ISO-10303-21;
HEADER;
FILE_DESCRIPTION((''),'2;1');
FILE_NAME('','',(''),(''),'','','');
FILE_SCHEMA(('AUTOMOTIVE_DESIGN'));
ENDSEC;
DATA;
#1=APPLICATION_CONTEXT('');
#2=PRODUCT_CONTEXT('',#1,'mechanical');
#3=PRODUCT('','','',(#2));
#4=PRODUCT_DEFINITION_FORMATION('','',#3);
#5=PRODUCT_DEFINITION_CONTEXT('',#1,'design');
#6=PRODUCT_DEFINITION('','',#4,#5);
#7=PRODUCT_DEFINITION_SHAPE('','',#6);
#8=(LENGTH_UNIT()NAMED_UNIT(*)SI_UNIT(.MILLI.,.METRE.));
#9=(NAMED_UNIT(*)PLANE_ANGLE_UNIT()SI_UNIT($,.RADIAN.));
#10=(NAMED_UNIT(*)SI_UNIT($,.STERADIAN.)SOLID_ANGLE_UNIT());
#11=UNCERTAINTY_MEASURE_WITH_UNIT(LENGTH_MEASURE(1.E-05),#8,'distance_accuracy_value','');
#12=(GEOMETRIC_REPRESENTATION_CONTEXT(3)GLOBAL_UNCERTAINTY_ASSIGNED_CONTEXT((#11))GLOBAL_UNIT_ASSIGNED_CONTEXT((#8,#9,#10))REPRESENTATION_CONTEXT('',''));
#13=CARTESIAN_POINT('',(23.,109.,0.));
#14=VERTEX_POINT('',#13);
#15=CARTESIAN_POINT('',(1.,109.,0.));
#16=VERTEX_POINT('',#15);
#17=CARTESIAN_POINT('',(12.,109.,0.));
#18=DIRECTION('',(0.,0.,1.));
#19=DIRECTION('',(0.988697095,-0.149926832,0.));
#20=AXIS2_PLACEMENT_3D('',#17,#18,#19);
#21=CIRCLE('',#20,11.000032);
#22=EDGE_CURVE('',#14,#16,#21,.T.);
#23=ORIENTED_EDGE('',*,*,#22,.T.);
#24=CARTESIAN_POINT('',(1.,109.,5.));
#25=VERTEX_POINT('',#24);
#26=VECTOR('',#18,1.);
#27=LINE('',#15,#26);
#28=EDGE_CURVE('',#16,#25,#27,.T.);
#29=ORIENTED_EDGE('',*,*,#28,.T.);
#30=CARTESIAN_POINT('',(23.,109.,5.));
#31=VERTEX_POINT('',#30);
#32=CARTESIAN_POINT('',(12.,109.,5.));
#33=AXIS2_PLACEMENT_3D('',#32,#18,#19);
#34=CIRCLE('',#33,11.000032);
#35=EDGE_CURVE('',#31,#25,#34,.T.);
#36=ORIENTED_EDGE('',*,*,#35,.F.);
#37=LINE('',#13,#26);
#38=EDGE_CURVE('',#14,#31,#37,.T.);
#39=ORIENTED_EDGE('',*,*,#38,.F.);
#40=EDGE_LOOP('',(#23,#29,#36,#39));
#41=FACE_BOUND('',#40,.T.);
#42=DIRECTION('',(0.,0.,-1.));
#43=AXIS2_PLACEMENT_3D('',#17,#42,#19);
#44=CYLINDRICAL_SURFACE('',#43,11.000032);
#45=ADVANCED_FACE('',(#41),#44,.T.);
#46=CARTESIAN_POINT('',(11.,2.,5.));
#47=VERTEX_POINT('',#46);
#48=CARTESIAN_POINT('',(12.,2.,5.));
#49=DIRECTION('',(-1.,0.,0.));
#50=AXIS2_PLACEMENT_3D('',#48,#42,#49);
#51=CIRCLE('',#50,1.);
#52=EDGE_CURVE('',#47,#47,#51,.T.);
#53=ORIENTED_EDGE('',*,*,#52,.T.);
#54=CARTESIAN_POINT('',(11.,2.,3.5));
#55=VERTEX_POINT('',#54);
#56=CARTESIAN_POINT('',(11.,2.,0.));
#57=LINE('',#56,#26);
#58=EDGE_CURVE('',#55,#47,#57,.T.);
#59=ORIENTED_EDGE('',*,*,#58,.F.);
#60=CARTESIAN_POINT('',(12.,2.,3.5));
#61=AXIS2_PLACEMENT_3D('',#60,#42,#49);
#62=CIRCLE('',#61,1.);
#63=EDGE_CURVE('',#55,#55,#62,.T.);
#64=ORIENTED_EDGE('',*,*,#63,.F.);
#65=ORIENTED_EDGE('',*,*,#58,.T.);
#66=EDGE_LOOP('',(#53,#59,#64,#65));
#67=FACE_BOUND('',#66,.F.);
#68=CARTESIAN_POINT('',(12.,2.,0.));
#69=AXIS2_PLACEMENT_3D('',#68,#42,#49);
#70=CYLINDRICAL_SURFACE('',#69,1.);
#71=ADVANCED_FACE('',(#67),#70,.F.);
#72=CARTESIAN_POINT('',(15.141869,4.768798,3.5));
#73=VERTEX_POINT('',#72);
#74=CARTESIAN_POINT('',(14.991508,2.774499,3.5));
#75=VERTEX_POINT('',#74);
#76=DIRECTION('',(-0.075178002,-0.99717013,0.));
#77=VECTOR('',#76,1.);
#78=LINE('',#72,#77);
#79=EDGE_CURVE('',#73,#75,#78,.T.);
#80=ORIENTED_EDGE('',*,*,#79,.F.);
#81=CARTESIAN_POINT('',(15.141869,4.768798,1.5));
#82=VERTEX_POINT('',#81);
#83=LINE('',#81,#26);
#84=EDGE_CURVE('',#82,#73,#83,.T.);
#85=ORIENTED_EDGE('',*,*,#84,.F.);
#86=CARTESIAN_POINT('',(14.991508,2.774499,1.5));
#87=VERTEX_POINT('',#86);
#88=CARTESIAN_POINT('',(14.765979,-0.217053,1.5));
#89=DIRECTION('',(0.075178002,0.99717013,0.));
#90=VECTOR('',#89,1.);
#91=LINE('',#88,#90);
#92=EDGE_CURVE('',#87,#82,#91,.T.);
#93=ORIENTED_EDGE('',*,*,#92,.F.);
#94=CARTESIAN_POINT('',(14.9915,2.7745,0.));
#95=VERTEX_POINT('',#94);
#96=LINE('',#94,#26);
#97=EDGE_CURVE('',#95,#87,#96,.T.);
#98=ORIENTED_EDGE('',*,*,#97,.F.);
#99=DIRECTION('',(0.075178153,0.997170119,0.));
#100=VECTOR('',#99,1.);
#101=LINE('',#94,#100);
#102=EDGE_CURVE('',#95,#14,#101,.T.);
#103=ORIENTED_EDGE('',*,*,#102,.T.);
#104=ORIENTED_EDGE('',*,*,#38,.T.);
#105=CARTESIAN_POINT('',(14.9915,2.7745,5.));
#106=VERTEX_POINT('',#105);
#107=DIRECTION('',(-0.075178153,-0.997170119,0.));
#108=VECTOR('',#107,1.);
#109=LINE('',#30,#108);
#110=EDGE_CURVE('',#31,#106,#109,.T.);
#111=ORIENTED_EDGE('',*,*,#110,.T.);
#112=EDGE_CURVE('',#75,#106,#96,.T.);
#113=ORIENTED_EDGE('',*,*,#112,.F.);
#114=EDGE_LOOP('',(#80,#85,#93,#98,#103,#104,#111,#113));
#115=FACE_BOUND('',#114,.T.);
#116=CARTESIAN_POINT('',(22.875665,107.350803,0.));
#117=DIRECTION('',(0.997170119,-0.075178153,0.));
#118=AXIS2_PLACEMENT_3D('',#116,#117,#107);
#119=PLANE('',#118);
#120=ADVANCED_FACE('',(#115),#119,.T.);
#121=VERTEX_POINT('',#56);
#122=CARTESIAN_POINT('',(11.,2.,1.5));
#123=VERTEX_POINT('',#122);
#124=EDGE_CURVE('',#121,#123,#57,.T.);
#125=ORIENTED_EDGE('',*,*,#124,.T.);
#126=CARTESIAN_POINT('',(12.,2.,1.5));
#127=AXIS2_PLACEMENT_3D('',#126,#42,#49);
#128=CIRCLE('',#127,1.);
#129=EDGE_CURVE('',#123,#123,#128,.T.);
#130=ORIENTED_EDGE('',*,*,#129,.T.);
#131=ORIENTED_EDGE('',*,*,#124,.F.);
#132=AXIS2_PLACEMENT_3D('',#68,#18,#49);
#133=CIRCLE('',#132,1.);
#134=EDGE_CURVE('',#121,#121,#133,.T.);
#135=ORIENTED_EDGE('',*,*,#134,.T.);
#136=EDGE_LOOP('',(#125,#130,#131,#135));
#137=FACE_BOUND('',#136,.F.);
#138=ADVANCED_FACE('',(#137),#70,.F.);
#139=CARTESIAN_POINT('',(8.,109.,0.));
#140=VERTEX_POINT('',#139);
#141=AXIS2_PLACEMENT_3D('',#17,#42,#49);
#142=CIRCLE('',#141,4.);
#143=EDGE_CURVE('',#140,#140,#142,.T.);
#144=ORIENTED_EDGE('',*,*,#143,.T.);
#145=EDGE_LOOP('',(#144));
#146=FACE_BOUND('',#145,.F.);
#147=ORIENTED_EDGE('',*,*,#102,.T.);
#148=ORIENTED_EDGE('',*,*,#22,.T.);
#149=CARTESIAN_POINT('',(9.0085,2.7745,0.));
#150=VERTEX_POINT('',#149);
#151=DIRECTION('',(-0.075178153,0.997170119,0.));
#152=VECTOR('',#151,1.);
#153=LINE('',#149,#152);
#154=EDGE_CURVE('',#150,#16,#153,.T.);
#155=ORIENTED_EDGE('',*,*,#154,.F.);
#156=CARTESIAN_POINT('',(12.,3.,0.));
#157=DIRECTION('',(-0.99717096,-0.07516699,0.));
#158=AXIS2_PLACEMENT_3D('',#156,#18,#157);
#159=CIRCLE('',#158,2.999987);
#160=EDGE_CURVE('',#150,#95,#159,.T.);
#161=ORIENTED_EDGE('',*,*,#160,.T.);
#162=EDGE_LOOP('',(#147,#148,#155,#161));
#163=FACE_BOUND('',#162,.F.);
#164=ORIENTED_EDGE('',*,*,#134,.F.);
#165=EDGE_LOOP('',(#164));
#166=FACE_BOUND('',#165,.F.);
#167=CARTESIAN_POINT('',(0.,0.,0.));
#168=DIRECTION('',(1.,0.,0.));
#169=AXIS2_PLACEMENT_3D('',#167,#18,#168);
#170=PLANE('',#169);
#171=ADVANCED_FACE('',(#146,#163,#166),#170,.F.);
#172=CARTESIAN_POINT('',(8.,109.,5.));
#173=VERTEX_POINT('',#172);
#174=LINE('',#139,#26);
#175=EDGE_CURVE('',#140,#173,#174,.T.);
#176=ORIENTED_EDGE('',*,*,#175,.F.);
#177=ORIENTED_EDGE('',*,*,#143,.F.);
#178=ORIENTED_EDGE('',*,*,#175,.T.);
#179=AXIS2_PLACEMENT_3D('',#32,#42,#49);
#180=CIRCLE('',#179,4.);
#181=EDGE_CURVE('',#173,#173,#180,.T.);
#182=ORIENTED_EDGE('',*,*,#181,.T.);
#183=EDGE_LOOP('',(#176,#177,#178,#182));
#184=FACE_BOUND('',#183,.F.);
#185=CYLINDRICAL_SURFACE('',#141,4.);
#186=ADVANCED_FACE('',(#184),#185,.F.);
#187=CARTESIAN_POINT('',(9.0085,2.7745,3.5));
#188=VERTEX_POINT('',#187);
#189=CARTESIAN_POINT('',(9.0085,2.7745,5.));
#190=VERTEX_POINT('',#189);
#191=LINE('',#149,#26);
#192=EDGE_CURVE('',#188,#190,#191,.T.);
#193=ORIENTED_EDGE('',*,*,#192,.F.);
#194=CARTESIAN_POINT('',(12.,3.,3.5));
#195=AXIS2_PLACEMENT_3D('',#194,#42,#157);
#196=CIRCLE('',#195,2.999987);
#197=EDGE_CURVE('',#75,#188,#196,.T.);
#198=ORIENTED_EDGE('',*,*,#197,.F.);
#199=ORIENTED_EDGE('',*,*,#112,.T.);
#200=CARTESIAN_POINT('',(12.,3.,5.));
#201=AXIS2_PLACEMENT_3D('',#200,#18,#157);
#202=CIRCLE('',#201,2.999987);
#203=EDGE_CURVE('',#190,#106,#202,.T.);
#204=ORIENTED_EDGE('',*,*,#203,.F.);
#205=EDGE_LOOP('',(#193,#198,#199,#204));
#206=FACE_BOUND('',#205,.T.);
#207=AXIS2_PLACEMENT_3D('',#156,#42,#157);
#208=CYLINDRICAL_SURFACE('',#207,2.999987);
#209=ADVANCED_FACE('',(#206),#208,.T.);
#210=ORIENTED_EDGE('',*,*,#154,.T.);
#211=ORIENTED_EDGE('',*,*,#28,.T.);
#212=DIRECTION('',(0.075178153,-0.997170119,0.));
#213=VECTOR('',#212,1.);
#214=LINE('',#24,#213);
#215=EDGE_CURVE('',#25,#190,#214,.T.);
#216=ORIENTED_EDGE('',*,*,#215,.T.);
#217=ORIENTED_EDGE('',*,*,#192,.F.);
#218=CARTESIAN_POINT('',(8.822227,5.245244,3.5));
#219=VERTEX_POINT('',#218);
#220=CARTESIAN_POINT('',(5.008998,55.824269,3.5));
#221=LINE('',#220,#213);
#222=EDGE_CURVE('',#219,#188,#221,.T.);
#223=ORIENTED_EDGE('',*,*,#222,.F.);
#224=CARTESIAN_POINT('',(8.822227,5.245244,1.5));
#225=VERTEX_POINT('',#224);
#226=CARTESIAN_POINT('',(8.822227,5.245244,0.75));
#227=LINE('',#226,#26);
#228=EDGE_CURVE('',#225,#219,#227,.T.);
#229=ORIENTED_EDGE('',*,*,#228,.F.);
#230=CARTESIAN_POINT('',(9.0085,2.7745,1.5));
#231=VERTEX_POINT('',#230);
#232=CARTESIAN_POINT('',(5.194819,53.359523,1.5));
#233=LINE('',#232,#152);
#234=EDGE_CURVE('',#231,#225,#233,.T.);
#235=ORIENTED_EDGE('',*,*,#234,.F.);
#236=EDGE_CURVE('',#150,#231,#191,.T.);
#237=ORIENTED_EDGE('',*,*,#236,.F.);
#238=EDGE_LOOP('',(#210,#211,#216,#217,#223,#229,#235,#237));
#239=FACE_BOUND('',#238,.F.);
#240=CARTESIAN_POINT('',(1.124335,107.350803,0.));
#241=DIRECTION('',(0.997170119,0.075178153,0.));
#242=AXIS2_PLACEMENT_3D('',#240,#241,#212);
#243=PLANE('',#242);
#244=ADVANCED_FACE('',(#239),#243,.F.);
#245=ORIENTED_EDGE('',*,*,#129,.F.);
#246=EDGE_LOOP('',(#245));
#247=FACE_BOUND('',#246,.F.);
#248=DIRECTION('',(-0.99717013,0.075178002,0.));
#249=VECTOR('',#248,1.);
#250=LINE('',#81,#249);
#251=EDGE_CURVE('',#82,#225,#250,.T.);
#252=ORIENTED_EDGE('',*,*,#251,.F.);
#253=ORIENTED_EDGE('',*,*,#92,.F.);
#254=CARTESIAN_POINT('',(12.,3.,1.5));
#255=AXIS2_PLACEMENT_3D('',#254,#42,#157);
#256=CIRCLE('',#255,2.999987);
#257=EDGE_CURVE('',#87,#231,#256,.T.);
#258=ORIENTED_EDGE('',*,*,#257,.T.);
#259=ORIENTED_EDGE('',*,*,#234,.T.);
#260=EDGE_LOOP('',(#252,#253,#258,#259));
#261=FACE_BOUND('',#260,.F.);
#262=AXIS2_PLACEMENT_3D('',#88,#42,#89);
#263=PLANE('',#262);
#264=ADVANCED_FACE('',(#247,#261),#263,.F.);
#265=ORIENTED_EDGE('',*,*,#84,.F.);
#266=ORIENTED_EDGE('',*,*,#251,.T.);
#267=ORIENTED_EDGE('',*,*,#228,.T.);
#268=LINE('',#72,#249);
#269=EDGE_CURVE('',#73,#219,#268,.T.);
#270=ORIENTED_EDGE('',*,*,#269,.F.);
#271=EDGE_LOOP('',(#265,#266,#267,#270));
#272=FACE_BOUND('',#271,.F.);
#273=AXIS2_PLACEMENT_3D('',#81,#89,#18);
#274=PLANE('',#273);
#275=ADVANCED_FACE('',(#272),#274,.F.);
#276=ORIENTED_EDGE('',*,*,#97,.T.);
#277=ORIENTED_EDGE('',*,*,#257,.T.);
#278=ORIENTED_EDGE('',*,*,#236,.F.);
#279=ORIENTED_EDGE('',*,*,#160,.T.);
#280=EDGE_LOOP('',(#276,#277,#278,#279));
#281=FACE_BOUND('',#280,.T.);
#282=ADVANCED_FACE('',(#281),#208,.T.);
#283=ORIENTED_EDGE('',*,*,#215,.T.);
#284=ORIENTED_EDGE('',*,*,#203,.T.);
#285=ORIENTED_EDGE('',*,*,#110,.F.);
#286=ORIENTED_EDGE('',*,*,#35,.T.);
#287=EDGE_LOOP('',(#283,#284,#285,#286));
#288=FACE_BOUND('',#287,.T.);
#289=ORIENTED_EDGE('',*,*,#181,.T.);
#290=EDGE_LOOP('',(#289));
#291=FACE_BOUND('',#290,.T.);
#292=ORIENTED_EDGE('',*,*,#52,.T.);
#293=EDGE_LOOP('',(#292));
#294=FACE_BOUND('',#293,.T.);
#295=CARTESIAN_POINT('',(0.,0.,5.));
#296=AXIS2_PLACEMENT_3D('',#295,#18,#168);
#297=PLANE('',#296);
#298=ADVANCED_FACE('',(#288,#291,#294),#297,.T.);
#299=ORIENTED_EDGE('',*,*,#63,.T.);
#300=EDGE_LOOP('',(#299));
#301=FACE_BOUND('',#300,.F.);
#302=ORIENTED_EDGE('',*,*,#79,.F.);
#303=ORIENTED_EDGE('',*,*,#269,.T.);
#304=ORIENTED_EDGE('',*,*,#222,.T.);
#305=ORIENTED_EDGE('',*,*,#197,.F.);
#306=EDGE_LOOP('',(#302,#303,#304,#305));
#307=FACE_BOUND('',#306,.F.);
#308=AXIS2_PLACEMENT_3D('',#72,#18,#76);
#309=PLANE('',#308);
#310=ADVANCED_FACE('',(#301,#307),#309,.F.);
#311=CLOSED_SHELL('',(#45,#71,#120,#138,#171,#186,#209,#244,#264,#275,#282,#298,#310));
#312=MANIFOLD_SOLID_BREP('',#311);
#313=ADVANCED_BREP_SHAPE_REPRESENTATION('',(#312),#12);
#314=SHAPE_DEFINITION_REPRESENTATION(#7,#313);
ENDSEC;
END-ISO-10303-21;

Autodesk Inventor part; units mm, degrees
ref_plane "YZ Plane" through (0, 0, 0) normal (1, 0, 0) x (0, 1, 0)
ref_plane "XZ Plane" through (0, 0, 0) normal (0, 1, 0) x (-1, 0, 0)
ref_plane "XY Plane" through (0, 0, 0) normal (0, 0, 1) x (1, 0, 0)
sketch "Esquisse1" plane through (0, 0, 0) normal (0, 0, 1) x (1, 0, 0)
  arc A0 (22.8757, 107.3508) -> (1.1243, 107.3508) centre (12, 109) ccw
  arc A1 (9.0085, 2.7745) -> (14.9915, 2.7745) centre (12, 3) ccw
  line L0 (1, 109) -> (9.0085, 2.7745)
  line L1 (23, 109) -> (14.9915, 2.7745)
  point P0 (0, 0)
  dimension "d2" = 22
extrude "Extrusion1" add sketch "Esquisse1" along normal blind 5 contours L1 A1 L0 A0
sketch "Esquisse2" plane through (23, 109, 5) normal (0.9971701, -0.075178, 0) x (0, 0, -1)
  line L0 (5, -109.527) -> (0, -109.527) projected
  line L1 (2.5, -109.527) -> (1.5, -109.527)
  line L2 (2.5, -109.527) -> (3.5, -109.527)
  line L3 (3.5, -109.527) -> (3.5, -104.527)
  line L4 (3.5, -104.527) -> (1.5, -104.527)
  line L5 (1.5, -104.527) -> (1.5, -109.527)
  point P0 (5, -110.4206)
  dimension "d6" = 1
  dimension "d7" = 1
  dimension "d8" = 5
  dimension "d9" = 2
extrude "Extrusion2" cut sketch "Esquisse2" against normal through all
sketch "Esquisse3" plane through (0, 0, 0) normal (0, 0, -1) x (-1, 0, 0)
  arc A0 (-14.9915, 2.7745) -> (-9.0085, 2.7745) centre (-12, 3) ccw projected
  arc A1 (-1, 109) -> (-23, 109) centre (-12, 109) ccw projected
  circle A2 centre (-12, 109) radius 4
  arc A3 (-14.9915, 2.7745) -> (-9.0085, 2.7745) centre (-12, 3) ccw projected
  line L0 (-12, 0) -> (-12, 2)
  circle A4 centre (-12, 2) radius 1
  line L1 (-14.8284, 2) -> (-9.1716, 2)
  point P0 (0, 0)
  dimension "d13" = 8
  dimension "d24" = 2
  dimension "d25" = 2
  dimension "d26" = 5.6569
extrude "Extrusion3" cut sketch "Esquisse3" against normal through all contours L1 L0 A4 | A4 L1 | L0 L1 A4 | A2
properties part number "Jambe"
